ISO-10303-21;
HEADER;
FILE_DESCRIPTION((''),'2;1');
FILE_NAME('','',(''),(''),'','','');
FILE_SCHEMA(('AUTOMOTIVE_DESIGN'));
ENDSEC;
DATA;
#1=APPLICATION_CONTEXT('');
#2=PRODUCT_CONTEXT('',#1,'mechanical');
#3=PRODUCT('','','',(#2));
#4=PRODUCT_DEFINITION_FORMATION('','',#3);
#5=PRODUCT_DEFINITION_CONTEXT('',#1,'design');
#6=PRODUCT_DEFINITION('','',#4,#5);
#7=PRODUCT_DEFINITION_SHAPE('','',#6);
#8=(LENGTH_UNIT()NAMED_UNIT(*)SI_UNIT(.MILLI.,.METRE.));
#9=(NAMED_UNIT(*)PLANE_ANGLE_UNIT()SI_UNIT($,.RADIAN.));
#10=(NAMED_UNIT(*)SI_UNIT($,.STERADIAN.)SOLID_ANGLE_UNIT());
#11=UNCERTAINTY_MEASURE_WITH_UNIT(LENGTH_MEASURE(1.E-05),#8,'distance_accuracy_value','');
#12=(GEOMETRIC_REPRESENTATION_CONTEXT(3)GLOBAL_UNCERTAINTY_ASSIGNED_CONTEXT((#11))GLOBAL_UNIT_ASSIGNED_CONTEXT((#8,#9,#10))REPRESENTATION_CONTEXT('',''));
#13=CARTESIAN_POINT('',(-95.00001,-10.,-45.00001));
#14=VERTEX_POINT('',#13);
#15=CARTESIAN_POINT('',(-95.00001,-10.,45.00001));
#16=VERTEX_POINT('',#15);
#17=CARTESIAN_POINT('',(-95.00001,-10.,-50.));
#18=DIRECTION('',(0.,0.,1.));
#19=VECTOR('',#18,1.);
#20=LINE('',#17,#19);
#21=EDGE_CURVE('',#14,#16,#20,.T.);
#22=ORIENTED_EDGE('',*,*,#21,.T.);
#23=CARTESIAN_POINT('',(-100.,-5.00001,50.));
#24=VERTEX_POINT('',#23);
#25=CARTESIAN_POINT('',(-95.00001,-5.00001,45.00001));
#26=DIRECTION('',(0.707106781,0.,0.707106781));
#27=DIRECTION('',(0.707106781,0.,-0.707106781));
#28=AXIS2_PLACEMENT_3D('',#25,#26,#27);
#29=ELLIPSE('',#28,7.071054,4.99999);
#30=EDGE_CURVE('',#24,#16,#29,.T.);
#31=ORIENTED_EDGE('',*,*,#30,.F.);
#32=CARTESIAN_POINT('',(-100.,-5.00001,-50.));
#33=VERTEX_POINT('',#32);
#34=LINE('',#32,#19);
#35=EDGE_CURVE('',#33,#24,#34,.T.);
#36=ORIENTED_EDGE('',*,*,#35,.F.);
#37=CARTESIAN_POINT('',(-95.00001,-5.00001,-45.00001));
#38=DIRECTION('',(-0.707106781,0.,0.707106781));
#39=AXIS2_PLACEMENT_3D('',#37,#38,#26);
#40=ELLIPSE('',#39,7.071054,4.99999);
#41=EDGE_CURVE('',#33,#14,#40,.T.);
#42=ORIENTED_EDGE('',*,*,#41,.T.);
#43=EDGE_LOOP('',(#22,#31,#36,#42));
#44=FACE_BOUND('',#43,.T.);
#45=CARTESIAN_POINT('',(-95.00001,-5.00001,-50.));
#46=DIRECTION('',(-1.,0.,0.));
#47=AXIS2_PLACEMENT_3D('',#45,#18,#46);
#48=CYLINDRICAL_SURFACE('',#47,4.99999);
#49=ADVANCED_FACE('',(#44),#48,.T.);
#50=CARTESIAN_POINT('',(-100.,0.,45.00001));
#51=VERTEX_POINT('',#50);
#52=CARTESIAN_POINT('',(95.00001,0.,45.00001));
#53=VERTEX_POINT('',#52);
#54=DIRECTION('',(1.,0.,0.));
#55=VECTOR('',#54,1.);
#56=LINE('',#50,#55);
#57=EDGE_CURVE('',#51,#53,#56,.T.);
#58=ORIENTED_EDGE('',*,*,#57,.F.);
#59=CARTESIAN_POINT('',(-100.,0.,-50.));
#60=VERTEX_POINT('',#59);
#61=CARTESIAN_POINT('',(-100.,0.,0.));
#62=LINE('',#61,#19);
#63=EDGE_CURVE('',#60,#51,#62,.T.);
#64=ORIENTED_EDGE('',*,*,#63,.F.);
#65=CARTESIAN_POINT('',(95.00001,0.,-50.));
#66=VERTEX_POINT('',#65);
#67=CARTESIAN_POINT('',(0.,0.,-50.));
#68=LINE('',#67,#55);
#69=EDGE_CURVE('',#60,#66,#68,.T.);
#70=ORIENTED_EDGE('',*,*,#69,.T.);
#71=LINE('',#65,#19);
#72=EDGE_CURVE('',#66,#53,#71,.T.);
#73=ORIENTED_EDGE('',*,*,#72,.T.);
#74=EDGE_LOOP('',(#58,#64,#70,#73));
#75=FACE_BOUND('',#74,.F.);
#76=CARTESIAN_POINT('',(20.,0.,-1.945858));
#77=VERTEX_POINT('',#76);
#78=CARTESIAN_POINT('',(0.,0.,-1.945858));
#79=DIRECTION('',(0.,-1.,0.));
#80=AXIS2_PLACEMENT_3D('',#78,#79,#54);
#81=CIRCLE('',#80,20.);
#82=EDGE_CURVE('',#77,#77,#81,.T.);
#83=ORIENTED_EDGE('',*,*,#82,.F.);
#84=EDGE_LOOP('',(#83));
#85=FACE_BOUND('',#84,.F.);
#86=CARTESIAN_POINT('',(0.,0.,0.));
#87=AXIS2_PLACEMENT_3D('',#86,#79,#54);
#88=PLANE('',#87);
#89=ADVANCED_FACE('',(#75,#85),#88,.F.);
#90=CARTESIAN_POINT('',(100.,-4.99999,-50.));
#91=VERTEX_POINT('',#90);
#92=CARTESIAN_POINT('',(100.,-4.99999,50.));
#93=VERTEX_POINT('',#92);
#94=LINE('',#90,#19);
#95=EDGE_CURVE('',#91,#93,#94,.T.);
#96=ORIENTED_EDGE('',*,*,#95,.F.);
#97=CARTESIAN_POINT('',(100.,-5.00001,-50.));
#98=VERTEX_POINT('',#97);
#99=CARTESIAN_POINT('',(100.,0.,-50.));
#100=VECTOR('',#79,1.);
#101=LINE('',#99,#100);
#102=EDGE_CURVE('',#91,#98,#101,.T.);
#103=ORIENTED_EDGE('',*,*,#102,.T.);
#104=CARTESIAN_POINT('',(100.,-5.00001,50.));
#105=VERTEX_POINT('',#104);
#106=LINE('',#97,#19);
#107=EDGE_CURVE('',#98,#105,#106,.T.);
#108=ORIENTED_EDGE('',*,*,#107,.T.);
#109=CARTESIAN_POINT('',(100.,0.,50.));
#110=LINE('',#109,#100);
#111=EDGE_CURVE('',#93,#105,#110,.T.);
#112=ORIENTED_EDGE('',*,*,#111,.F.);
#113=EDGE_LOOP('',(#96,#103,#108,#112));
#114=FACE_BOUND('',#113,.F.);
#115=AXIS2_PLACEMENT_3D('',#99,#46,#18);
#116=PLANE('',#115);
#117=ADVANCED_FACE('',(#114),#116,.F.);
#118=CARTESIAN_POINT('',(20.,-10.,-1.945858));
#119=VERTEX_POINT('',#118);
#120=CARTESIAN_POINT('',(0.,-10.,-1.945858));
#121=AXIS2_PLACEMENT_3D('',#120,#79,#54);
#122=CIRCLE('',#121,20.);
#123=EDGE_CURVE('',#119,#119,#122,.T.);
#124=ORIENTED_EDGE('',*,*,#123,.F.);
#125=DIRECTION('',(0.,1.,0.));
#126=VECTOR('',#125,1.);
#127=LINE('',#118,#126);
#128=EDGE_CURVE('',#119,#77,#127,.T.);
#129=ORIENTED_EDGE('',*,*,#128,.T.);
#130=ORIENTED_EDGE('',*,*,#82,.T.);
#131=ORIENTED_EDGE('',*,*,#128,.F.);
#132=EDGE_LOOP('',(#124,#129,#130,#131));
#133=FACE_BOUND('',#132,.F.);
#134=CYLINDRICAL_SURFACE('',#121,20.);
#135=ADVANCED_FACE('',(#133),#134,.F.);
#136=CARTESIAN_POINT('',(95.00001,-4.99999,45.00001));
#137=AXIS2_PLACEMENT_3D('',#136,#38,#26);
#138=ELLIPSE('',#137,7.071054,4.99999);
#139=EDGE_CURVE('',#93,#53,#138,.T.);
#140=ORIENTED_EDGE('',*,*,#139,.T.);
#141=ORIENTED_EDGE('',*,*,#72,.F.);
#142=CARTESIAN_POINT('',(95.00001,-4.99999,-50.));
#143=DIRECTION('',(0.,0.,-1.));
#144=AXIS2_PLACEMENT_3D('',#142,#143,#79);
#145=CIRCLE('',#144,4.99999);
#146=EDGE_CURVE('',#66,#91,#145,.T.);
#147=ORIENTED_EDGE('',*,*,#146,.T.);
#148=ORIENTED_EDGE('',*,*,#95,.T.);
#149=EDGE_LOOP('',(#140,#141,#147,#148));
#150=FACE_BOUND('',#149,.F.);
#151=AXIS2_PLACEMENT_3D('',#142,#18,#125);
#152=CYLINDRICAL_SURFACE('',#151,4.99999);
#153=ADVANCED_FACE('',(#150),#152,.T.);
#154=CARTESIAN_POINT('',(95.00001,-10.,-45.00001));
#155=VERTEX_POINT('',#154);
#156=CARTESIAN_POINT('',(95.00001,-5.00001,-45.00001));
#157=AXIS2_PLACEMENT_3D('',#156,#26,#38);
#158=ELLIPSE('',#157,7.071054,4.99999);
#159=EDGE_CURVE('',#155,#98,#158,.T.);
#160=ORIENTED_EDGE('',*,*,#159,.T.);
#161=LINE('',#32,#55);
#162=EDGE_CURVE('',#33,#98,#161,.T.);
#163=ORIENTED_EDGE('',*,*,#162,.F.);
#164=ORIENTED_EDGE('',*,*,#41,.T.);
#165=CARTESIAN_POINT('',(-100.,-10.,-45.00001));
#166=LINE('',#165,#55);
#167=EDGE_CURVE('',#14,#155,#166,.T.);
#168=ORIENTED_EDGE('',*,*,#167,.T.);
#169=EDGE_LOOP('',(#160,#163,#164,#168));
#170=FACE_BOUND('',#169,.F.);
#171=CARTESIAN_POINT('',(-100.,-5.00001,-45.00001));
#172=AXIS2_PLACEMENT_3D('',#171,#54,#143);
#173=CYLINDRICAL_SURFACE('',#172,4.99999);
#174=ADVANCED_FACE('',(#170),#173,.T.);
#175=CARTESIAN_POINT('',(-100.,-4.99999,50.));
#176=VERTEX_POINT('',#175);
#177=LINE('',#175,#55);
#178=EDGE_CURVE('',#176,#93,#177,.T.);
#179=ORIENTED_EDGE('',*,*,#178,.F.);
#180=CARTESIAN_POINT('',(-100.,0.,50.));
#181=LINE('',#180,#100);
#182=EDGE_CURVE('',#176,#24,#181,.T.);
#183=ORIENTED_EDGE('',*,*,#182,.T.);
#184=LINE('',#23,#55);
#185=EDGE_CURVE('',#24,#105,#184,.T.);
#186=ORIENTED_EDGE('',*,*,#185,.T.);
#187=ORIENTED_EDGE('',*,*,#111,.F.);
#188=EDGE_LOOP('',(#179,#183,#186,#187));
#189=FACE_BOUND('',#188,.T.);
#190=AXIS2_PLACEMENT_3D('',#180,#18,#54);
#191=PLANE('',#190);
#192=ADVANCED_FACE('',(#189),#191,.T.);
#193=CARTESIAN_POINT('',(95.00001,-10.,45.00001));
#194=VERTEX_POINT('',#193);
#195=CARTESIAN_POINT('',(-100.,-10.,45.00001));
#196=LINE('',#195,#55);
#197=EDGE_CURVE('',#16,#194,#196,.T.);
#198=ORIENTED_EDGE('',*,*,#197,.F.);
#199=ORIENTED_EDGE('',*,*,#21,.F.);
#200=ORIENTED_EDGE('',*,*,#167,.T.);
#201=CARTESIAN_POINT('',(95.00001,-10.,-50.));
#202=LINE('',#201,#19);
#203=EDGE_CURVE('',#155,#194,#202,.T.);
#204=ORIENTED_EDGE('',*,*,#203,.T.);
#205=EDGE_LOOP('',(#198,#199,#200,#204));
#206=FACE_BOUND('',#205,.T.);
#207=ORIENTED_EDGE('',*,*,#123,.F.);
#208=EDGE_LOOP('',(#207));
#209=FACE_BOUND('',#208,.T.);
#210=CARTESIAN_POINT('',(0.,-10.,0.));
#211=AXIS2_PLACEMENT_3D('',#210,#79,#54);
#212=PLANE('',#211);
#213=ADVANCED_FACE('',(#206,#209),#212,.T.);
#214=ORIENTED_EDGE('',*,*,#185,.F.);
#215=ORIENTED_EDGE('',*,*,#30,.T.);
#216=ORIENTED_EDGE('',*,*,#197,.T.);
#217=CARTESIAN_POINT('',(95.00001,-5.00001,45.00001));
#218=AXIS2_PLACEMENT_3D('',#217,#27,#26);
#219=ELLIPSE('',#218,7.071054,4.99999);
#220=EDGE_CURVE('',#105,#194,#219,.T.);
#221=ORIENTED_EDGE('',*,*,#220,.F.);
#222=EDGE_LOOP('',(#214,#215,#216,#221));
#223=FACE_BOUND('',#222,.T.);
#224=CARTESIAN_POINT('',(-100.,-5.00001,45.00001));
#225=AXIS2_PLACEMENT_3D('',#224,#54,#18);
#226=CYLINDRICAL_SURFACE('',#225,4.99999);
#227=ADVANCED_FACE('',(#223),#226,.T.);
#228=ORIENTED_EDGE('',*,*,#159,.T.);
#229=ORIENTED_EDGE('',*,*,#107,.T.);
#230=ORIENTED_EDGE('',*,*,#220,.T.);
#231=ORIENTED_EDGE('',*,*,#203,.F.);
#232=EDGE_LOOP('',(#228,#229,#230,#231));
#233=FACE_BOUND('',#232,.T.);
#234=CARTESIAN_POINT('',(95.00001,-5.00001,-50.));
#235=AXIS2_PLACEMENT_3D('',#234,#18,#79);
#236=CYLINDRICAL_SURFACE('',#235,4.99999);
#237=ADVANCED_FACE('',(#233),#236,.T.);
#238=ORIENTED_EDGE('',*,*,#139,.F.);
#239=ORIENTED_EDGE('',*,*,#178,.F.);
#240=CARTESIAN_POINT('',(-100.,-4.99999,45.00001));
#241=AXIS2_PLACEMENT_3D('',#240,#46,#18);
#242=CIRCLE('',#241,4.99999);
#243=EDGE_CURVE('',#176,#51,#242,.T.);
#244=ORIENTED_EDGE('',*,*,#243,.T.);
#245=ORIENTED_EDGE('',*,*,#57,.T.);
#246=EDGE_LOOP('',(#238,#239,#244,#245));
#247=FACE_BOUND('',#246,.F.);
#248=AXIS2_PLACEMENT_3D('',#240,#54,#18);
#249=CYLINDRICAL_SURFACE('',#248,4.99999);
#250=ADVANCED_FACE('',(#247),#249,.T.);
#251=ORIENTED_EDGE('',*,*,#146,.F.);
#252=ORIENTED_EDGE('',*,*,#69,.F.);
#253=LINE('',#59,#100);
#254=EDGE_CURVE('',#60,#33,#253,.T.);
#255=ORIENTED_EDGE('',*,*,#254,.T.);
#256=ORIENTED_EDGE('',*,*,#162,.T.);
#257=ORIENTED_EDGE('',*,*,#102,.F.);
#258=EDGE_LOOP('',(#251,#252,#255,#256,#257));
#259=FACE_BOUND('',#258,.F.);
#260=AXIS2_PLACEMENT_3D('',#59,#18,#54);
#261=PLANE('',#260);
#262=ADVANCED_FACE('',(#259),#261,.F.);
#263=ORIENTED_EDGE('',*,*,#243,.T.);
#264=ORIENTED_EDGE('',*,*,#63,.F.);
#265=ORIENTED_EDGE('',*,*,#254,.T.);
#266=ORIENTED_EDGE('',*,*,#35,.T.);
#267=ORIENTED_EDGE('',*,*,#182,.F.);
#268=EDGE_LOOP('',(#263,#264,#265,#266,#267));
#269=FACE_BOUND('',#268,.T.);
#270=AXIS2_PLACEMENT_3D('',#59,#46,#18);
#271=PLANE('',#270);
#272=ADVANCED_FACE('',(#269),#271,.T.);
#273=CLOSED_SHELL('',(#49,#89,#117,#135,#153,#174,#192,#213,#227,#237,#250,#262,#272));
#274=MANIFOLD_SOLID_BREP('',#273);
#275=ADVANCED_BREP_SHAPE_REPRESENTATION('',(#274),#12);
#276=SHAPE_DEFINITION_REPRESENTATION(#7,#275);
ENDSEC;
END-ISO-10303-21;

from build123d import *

# Parameters (mm, degrees)
F0_W     = 200
F0_H     = 100
F1_DEPTH = 10
F2_R     = 20
F3_DEPTH = 10.001
F4_R     = 4.99999


# Not quite as in the source:
# - a fillet or chamfer is up to 0.001 mm smaller than in the source, because OpenCascade refuses the exact size


with BuildPart() as f1:
    # F0 (on Front) → F1 (new body)
    with BuildSketch(Plane.XZ):
        Rectangle(F0_W, F0_H)
    extrude(amount=F1_DEPTH)

    # F2 (on face) → F3 (cut, through all)
    with BuildSketch(Plane.XZ.offset(10)):
        with Locations((0, -1.9458576571)):
            Circle(F2_R)
    extrude(amount=-F3_DEPTH, mode=Mode.SUBTRACT)

    # F4 (radius 5 in the source; OpenCascade refuses exactly that, so slightly less here)
    f4_edges = [f1.edges().sort_by_distance(p)[0] for p in [
        (0, -10, 50),
        (0, 0, 50),
        (100, 0, 0),
        (100, -10, 0),
        (0, -10, -50),
        (-100, -10, 0),
    ]]
    fillet(f4_edges, radius=F4_R)


solid = f1.part
